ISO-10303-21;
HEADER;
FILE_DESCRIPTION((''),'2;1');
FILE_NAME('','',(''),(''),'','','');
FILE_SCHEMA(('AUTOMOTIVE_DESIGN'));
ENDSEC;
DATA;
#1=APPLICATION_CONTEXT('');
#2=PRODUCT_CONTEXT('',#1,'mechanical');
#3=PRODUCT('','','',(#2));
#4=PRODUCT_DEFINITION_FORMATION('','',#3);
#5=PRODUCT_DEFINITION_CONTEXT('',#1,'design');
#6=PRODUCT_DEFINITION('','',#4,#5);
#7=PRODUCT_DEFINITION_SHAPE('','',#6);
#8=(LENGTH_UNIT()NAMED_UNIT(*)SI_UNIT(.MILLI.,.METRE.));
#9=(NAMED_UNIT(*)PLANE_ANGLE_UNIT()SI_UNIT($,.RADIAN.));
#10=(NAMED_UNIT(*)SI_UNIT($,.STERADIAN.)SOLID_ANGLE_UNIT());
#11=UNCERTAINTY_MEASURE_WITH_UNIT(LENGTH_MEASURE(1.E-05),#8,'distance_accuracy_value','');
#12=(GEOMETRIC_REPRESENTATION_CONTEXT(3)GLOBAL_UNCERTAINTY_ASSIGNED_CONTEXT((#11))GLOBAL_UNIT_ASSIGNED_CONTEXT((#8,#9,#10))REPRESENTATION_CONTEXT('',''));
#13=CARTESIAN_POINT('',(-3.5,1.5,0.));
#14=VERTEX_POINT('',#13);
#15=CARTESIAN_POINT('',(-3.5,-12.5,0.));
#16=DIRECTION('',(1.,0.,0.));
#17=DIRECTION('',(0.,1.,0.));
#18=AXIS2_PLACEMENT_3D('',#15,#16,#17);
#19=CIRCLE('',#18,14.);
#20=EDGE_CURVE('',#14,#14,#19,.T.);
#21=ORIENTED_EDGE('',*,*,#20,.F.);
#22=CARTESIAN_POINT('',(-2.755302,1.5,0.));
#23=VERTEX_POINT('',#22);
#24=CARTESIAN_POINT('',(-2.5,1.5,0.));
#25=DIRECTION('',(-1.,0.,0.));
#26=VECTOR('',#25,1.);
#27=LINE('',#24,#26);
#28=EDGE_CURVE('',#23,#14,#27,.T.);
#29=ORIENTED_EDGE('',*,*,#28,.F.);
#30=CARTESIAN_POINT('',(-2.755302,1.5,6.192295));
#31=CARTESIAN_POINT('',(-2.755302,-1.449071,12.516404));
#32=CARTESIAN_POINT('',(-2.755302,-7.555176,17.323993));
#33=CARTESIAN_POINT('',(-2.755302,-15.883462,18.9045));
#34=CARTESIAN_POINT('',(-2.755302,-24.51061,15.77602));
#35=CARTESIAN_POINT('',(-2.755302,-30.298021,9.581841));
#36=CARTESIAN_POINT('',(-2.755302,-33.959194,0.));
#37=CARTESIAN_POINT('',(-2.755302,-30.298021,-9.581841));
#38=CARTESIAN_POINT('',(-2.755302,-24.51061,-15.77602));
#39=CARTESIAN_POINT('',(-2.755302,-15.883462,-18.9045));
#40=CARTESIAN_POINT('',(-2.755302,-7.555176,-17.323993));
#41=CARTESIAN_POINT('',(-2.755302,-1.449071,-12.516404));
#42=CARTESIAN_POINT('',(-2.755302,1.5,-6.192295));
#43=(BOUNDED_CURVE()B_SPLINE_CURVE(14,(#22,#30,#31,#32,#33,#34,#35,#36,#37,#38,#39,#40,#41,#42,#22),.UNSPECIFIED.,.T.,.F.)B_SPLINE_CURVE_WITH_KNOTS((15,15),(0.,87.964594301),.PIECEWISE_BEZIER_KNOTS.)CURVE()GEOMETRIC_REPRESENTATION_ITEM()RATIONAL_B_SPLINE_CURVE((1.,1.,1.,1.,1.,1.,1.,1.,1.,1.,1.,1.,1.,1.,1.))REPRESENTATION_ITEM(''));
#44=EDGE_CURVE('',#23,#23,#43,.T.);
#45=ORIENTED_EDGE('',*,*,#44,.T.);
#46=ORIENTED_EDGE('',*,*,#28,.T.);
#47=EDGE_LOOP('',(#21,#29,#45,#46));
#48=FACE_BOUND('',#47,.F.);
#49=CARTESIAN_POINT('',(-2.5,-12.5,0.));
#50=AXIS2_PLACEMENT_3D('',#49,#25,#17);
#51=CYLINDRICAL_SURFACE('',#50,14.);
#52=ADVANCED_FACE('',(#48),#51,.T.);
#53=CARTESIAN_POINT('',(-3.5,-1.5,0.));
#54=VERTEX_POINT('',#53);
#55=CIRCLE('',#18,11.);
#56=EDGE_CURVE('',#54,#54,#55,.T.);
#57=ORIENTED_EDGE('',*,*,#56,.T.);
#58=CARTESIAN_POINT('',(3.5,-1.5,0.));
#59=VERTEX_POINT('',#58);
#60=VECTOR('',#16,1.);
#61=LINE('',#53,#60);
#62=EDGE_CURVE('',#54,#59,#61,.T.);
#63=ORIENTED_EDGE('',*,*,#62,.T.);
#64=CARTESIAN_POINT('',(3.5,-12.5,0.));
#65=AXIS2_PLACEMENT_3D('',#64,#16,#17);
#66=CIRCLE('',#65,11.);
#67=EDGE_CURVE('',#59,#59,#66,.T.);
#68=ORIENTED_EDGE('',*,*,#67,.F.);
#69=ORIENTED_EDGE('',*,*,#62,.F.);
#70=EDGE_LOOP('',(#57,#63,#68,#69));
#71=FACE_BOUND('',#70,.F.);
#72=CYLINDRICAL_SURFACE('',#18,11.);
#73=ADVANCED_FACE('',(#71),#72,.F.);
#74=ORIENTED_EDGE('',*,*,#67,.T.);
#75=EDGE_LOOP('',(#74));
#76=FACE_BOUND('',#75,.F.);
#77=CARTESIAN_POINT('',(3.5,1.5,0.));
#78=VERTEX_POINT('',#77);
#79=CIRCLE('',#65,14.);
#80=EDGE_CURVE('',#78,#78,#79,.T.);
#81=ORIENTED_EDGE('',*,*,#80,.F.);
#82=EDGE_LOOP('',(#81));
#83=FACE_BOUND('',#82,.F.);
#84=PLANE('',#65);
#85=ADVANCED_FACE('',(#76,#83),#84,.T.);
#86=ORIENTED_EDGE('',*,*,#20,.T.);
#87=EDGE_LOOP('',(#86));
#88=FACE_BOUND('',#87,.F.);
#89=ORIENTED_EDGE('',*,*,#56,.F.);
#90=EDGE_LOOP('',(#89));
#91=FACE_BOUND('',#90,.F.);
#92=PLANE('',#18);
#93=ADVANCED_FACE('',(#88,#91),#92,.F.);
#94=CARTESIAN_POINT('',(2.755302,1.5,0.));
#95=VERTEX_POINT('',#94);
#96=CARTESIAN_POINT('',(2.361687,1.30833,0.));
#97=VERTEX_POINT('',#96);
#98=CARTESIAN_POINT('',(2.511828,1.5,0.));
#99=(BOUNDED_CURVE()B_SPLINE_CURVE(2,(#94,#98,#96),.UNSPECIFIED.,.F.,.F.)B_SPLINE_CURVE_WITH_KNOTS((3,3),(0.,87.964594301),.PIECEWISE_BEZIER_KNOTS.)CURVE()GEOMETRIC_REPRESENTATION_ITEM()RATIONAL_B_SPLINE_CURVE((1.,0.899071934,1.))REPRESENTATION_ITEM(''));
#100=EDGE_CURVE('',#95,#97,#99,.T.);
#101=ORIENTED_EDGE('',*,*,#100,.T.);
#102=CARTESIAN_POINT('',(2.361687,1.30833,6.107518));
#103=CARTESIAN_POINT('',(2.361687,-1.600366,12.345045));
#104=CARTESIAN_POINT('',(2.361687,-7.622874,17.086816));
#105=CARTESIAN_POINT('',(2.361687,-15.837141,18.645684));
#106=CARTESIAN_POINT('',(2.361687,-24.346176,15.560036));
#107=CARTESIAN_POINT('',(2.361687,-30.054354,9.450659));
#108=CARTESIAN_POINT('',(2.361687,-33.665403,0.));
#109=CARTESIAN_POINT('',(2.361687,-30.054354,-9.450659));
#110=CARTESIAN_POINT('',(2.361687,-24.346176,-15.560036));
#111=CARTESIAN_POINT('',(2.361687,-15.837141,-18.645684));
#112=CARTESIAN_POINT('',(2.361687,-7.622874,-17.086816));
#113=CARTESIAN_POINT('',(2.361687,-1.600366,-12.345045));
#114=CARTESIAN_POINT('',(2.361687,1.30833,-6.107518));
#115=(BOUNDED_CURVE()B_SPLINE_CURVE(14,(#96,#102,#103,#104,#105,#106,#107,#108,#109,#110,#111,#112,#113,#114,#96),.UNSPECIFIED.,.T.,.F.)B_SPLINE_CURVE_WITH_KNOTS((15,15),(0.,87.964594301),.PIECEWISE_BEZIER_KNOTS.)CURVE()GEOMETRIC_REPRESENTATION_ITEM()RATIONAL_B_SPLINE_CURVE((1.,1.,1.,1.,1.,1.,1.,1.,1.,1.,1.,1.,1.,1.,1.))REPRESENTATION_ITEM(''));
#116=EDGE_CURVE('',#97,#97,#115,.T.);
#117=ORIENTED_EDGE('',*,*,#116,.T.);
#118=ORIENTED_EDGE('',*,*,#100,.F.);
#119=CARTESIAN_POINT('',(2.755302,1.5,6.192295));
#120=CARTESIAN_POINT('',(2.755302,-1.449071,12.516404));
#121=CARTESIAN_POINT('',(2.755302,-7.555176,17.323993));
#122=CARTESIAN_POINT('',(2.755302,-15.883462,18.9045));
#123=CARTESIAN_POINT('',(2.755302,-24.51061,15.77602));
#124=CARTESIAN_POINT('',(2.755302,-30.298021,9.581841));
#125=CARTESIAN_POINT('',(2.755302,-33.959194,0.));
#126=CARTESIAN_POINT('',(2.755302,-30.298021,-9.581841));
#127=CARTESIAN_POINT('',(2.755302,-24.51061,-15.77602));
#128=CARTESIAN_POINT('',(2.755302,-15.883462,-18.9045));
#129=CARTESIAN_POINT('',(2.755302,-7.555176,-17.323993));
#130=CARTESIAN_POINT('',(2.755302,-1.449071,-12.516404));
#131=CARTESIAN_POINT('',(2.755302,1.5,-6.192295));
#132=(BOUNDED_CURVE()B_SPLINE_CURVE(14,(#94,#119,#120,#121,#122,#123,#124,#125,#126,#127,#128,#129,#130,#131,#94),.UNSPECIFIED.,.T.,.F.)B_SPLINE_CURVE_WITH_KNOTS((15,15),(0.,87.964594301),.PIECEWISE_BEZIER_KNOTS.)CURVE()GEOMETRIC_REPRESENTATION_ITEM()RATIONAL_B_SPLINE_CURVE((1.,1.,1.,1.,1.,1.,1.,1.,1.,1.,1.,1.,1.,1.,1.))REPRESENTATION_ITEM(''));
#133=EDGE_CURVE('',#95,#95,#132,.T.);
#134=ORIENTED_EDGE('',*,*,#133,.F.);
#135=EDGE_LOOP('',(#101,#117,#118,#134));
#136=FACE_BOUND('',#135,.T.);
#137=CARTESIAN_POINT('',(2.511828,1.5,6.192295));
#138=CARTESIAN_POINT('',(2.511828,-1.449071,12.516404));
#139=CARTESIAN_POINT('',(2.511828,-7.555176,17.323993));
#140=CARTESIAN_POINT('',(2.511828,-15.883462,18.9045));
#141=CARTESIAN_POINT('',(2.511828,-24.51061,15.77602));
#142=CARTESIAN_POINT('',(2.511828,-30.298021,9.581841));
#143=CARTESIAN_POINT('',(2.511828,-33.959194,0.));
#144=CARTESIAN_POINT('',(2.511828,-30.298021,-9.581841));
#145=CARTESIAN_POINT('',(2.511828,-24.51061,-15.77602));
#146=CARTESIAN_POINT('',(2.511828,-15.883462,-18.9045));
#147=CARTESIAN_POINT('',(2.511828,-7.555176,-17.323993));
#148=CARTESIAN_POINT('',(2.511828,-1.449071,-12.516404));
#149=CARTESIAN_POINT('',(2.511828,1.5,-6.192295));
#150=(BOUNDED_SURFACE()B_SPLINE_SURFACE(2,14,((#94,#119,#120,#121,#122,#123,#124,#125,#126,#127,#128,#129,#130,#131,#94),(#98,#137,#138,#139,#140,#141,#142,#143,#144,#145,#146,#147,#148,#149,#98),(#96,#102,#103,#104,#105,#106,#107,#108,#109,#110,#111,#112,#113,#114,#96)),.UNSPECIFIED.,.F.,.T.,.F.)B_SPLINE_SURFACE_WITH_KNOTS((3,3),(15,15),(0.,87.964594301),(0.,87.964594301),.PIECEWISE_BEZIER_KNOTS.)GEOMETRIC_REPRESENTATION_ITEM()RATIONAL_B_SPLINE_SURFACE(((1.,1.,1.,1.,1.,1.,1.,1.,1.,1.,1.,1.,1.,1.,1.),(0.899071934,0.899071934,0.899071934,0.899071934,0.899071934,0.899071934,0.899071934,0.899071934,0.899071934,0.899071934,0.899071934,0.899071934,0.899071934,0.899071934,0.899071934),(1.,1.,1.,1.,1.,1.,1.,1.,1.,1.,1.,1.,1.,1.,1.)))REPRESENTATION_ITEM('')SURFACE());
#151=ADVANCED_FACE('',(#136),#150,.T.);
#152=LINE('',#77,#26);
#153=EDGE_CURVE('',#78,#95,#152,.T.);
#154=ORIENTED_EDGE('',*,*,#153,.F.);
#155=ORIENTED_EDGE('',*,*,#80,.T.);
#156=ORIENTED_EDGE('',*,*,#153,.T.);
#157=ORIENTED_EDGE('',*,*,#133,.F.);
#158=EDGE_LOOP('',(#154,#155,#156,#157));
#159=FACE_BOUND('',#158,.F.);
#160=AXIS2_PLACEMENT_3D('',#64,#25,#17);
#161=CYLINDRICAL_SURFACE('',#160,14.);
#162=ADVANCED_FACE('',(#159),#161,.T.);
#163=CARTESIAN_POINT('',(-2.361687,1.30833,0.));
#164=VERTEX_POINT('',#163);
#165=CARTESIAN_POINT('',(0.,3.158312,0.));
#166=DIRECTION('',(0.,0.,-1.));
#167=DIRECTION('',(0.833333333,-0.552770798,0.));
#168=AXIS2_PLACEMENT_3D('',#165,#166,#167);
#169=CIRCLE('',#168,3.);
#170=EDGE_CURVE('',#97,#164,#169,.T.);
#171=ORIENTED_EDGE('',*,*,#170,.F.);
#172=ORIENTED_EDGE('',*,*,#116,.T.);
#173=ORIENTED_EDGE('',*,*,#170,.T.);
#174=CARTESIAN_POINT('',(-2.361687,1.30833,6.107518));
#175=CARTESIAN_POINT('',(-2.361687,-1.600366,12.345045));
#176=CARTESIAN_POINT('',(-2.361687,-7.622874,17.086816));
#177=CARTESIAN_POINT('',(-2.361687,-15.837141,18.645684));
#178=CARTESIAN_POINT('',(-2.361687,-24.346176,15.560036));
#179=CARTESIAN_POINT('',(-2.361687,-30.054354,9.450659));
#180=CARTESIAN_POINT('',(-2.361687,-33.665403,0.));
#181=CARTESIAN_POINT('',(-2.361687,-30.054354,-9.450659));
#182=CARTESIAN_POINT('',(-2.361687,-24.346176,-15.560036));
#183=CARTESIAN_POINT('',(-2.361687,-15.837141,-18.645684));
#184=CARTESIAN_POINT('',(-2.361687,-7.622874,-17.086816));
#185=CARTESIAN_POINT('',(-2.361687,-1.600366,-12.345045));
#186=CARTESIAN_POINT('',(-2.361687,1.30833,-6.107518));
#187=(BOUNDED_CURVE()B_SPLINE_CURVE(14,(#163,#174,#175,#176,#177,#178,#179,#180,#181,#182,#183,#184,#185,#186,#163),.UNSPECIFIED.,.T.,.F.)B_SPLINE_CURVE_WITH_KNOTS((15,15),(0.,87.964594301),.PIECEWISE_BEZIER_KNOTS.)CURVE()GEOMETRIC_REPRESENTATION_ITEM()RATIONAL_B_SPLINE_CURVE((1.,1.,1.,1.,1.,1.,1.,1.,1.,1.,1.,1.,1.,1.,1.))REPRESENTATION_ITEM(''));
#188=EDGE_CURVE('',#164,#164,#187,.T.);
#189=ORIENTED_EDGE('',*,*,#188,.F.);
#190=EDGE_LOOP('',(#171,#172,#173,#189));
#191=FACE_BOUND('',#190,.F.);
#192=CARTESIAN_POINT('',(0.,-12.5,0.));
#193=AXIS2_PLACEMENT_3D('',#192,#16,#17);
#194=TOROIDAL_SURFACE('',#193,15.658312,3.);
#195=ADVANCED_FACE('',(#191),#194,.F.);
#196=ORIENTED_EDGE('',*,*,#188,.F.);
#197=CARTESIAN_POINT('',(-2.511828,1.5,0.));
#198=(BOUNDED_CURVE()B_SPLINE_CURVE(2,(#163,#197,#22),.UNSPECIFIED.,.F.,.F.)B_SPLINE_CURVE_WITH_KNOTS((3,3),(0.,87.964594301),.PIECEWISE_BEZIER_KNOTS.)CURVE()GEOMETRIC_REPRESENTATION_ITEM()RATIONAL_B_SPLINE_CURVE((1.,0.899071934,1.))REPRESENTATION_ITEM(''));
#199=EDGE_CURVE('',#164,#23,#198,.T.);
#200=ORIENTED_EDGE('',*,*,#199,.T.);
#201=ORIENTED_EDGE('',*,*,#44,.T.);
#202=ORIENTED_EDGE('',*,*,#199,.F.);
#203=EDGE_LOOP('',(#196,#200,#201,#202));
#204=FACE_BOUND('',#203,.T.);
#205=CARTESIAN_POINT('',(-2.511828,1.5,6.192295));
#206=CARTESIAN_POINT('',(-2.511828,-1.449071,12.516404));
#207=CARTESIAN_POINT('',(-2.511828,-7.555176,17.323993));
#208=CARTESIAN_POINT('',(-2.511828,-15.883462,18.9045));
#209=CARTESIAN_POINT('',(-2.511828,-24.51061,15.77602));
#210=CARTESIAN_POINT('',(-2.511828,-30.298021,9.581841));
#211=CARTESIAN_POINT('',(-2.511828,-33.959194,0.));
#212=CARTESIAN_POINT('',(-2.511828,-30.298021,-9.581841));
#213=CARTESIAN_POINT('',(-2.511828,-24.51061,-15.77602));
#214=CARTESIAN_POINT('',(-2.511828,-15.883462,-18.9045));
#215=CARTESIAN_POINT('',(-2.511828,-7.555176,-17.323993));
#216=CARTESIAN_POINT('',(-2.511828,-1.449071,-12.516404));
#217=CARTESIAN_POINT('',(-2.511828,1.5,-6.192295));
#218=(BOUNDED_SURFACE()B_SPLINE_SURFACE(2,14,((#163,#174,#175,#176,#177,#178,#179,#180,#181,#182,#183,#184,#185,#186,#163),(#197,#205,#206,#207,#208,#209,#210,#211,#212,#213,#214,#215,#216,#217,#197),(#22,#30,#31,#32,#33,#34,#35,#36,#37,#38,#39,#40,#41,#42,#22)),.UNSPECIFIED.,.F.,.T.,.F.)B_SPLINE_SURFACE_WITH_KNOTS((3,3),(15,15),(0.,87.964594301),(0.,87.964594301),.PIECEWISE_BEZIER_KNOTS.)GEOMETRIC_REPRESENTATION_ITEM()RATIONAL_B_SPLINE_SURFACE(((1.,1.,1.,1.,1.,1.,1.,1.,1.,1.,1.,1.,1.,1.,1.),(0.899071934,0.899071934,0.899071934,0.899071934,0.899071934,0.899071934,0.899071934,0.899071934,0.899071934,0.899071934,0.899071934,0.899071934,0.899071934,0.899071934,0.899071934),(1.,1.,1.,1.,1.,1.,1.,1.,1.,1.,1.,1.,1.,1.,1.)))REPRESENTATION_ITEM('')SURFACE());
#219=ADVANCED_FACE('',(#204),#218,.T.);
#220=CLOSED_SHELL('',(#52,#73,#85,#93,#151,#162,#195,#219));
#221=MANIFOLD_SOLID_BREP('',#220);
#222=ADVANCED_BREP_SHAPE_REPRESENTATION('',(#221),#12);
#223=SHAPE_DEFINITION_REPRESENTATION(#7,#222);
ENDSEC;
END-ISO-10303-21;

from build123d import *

# Parameters (mm, degrees)
F2_R = 0.5


with BuildPart() as f1:
    # F0 (on Top) → F1 (revolve)
    with BuildSketch(Plane.XY):
        with BuildLine():
            Line((-3.5, -1.5), (3.5, -1.5))
            Line((3.5, -1.5), (3.5, 1.5))
            Line((3.5, 1.5), (2.5, 1.5))
            ThreePointArc((2.5, 1.5), (0, 0.1583123952), (-2.5, 1.5))
            Line((-2.5, 1.5), (-3.5, 1.5))
            Line((-3.5, 1.5), (-3.5, -1.5))
        make_face()
    revolve(axis=Axis((0, -12.5, 0), (1, 0, 0)))

    # F2
    f2_edges = [f1.edges().sort_by_distance(p)[0] for p in [
        (-2.5, -26.5, 0),
        (2.5, -26.5, 0),
    ]]
    fillet(f2_edges, radius=F2_R)


solid = f1.part
